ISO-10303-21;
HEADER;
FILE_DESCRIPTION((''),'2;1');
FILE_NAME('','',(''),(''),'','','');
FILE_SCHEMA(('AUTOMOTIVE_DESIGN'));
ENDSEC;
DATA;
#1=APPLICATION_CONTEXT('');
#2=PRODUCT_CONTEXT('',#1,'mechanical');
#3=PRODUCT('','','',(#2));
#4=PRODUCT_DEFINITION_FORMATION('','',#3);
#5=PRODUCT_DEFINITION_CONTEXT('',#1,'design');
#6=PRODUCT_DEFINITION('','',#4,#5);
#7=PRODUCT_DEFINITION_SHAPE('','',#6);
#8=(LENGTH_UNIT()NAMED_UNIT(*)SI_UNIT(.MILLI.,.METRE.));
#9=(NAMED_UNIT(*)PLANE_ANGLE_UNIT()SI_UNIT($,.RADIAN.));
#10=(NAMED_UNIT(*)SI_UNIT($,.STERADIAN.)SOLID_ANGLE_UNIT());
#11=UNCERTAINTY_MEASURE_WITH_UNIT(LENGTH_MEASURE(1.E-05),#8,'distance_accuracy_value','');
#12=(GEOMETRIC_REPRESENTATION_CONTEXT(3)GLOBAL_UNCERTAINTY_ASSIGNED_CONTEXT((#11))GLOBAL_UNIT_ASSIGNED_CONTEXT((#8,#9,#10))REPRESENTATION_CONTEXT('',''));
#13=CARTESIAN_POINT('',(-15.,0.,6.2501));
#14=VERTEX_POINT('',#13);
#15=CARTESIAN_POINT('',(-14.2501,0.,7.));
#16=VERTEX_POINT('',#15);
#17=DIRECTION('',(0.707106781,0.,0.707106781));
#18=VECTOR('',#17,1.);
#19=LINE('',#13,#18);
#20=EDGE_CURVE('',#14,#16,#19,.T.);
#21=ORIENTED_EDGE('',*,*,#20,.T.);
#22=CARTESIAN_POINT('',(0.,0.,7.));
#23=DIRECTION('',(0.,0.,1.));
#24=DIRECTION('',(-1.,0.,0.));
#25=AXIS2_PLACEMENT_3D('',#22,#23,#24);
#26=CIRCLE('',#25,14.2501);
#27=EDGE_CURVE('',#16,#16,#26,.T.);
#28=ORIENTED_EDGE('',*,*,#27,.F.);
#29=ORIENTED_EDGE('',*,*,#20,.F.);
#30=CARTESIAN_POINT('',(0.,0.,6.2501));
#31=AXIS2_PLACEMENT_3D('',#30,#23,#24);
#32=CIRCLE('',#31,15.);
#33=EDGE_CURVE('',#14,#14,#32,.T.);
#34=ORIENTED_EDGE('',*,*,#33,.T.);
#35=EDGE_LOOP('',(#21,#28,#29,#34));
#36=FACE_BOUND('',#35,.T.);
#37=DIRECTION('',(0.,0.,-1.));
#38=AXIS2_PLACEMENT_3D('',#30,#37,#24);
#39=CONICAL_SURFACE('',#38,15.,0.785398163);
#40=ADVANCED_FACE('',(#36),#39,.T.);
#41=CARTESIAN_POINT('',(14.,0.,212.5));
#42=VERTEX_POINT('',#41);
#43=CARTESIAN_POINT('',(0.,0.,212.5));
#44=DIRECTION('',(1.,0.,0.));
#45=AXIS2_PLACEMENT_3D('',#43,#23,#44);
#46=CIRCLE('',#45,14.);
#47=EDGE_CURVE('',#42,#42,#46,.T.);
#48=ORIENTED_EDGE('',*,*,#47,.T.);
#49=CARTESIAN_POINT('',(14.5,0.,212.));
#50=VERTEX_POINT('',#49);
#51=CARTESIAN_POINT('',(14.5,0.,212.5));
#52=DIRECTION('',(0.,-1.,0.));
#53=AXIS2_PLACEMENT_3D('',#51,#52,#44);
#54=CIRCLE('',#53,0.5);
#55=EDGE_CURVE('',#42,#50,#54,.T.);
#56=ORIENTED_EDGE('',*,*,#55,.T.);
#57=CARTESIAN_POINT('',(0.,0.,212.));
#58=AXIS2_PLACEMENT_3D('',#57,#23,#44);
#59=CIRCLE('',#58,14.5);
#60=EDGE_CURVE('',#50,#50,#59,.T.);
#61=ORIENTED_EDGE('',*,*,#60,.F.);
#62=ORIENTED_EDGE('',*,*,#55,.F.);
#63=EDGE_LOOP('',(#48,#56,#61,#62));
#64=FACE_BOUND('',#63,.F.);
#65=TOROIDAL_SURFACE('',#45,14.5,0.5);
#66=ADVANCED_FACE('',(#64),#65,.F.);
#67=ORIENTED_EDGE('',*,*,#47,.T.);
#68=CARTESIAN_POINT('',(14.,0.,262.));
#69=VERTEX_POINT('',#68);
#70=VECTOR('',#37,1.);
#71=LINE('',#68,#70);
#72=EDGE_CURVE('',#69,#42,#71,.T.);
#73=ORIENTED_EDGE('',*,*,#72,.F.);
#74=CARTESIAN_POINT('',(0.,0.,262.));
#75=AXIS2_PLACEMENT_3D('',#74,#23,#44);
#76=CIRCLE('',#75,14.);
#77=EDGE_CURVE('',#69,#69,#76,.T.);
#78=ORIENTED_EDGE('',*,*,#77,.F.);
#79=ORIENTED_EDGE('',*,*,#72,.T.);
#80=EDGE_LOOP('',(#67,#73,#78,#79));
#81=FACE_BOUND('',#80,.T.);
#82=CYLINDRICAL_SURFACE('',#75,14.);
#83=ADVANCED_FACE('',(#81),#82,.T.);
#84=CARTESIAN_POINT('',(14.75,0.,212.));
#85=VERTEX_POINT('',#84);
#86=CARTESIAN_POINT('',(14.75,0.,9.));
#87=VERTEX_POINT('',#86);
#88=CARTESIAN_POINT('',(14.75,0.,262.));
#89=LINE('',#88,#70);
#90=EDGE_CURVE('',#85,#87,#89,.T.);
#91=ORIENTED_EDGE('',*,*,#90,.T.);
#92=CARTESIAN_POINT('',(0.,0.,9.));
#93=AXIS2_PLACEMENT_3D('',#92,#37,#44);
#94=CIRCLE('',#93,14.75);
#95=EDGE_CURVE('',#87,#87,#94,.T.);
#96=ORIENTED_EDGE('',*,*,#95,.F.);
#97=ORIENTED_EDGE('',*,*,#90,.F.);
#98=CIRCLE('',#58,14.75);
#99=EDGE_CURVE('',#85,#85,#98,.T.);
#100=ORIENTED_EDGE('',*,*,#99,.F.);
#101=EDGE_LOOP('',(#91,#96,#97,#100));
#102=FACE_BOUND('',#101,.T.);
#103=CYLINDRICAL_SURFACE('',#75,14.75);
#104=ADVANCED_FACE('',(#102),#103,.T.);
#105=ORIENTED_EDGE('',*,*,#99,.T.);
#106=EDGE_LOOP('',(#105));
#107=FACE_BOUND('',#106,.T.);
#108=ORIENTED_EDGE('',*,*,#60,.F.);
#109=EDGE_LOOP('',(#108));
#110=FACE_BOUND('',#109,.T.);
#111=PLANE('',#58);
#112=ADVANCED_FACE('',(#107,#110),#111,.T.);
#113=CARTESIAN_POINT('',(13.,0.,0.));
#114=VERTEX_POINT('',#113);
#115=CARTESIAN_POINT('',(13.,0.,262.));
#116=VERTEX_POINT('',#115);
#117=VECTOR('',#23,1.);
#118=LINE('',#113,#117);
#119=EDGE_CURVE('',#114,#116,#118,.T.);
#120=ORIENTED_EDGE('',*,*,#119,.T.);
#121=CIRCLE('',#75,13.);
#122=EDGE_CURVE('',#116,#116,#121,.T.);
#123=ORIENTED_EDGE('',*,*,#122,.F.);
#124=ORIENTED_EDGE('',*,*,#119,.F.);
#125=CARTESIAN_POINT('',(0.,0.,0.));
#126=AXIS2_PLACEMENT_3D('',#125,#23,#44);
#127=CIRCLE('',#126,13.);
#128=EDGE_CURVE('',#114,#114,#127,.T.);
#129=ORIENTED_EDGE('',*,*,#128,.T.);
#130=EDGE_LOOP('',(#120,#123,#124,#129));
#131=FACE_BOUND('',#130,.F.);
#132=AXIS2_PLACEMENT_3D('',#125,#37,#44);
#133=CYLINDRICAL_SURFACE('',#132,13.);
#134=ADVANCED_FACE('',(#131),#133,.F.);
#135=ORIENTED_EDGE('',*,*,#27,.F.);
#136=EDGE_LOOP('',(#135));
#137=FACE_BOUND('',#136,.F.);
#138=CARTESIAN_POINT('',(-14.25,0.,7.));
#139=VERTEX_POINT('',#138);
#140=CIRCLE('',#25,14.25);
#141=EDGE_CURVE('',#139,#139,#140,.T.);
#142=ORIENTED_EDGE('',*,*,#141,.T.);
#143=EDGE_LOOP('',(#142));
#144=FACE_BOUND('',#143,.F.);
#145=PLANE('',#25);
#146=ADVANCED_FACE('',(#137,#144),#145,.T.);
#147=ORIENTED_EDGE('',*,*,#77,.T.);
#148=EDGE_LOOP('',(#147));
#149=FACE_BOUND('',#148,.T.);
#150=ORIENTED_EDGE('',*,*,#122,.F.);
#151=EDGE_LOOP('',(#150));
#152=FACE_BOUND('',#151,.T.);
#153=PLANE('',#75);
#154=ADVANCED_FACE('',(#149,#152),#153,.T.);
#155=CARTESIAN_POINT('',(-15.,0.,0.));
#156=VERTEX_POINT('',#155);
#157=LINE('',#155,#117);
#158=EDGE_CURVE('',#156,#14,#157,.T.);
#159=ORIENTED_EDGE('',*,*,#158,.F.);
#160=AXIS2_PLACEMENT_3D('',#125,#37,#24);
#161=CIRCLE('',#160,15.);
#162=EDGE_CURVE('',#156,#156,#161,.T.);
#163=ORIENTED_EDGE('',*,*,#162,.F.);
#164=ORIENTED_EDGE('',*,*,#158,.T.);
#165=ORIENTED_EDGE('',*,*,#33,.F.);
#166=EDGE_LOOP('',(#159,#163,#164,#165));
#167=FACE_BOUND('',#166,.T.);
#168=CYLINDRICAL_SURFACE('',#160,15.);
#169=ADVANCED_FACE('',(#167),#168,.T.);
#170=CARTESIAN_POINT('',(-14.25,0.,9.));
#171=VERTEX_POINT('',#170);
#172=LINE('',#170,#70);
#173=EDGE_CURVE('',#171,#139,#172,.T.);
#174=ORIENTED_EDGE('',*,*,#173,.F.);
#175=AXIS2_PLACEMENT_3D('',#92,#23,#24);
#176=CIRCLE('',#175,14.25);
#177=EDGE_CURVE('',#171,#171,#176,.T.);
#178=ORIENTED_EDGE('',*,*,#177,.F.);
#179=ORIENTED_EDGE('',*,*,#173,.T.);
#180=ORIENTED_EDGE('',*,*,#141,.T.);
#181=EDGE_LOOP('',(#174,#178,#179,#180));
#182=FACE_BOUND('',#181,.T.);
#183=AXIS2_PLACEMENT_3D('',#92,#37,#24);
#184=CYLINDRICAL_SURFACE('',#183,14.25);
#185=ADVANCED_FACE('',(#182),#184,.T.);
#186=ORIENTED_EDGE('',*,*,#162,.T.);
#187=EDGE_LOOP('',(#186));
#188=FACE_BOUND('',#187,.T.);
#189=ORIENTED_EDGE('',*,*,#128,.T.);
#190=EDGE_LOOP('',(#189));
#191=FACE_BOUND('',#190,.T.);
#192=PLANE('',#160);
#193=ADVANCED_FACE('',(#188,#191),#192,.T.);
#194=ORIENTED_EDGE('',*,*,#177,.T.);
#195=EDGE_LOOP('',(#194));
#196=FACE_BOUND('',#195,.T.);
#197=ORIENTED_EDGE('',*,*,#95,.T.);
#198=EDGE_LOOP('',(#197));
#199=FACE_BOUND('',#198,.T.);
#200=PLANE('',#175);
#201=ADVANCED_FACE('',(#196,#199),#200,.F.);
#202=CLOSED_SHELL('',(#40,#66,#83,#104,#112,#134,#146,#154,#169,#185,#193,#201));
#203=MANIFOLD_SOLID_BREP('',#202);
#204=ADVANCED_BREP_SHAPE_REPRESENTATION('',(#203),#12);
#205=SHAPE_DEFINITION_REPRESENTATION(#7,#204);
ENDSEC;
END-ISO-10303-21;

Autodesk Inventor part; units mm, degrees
ref_plane "YZ Plane" through (0, 0, 0) normal (1, 0, 0) x (0, 1, 0)
ref_plane "XZ Plane" through (0, 0, 0) normal (0, 1, 0) x (-1, 0, 0)
ref_plane "XY Plane" through (0, 0, 0) normal (0, 0, 1) x (1, 0, 0)
sketch "Skizze1" plane through (0, 0, 0) normal (0, 0, 1) x (1, 0, 0)
  circle A0 centre (0, 0) radius 13
  circle A1 centre (0, 0) radius 15
  dimension "d0" = 30
  dimension "d1" = 2
extrude "Extrusion1" add sketch "Skizze1" along normal blind 262
sketch "Skizze2" plane through (0, 0, 262) normal (0, 0, 1) x (1, 0, 0)
  circle A0 centre (0, 0) radius 15 projected
  circle A1 centre (0, 0) radius 14.75
  dimension "d4" = 29.5
extrude "Extrusion2" cut sketch "Skizze2" against normal through all
sketch "Skizze3" plane through (0, 0, 0) normal (0, 0, -1) x (-1, 0, 0)
  circle A0 centre (0, 0) radius 14.75 projected
  circle A1 centre (0, 0) radius 13 projected
  circle A2 centre (0, 0) radius 15
  dimension "d7" = 30
extrude "Extrusion3" add sketch "Skizze3" against normal blind 9 contours A2
sketch "Skizze4" plane through (0, 0, 262) normal (0, 0, 1) x (1, 0, 0)
  circle A0 centre (0, 0) radius 14.75 projected
  circle A1 centre (0, 0) radius 13 projected
  circle A2 centre (0, 0) radius 14
  dimension "d10" = 28
extrude "Extrusion4" cut sketch "Skizze4" against normal blind 50 contours A0
sketch "Skizze5" plane through (0, 0, 0) normal (0, 1, 0) x (-1, 0, 0)
  line L0 (-15, 9) -> (15, 9) projected
  line L1 (15, 0) -> (-15, 0) projected
  line L2 (14.75, 9) -> (-14.75, 9) projected
  line L3 (15, 0) -> (15, 9) projected
  line L4 (13, 0) -> (13, 262) projected
  line L5 (14.75, 212) -> (14.75, 9) projected
  line L6 (15, 9) -> (14.25, 9)
  line L7 (14.25, 9) -> (14.25, 7)
  line L8 (14.25, 7) -> (15, 7)
  line L9 (15, 7) -> (15, 9)
  line L10 (21, 0) -> (-21, 0) projected
  line L11 (0, -50) -> (0, 300) projected
  point P0 (0, 0)
  point P1 (-9.75, 200)
  point P2 (9.75, 200)
  dimension "d13" = 2
  dimension "d14" = 28.5
revolve "Umdrehung1" cut sketch "Skizze5" angle 360 about axis through (0, 0, -10) along (0, 0, 1) contours L0 L3 L8 L7
chamfer "Fase1" distance 0.75 angle 45 1 edges at (15, 0, 7)
thread "Gewinde4" size "M30x1" class "6g" standard "ANSI Metric M Profile" full length
fillet "Rundung1" radius 0.5 1 edges at (-14, 0, 212)
properties part number "13_0204_026"
